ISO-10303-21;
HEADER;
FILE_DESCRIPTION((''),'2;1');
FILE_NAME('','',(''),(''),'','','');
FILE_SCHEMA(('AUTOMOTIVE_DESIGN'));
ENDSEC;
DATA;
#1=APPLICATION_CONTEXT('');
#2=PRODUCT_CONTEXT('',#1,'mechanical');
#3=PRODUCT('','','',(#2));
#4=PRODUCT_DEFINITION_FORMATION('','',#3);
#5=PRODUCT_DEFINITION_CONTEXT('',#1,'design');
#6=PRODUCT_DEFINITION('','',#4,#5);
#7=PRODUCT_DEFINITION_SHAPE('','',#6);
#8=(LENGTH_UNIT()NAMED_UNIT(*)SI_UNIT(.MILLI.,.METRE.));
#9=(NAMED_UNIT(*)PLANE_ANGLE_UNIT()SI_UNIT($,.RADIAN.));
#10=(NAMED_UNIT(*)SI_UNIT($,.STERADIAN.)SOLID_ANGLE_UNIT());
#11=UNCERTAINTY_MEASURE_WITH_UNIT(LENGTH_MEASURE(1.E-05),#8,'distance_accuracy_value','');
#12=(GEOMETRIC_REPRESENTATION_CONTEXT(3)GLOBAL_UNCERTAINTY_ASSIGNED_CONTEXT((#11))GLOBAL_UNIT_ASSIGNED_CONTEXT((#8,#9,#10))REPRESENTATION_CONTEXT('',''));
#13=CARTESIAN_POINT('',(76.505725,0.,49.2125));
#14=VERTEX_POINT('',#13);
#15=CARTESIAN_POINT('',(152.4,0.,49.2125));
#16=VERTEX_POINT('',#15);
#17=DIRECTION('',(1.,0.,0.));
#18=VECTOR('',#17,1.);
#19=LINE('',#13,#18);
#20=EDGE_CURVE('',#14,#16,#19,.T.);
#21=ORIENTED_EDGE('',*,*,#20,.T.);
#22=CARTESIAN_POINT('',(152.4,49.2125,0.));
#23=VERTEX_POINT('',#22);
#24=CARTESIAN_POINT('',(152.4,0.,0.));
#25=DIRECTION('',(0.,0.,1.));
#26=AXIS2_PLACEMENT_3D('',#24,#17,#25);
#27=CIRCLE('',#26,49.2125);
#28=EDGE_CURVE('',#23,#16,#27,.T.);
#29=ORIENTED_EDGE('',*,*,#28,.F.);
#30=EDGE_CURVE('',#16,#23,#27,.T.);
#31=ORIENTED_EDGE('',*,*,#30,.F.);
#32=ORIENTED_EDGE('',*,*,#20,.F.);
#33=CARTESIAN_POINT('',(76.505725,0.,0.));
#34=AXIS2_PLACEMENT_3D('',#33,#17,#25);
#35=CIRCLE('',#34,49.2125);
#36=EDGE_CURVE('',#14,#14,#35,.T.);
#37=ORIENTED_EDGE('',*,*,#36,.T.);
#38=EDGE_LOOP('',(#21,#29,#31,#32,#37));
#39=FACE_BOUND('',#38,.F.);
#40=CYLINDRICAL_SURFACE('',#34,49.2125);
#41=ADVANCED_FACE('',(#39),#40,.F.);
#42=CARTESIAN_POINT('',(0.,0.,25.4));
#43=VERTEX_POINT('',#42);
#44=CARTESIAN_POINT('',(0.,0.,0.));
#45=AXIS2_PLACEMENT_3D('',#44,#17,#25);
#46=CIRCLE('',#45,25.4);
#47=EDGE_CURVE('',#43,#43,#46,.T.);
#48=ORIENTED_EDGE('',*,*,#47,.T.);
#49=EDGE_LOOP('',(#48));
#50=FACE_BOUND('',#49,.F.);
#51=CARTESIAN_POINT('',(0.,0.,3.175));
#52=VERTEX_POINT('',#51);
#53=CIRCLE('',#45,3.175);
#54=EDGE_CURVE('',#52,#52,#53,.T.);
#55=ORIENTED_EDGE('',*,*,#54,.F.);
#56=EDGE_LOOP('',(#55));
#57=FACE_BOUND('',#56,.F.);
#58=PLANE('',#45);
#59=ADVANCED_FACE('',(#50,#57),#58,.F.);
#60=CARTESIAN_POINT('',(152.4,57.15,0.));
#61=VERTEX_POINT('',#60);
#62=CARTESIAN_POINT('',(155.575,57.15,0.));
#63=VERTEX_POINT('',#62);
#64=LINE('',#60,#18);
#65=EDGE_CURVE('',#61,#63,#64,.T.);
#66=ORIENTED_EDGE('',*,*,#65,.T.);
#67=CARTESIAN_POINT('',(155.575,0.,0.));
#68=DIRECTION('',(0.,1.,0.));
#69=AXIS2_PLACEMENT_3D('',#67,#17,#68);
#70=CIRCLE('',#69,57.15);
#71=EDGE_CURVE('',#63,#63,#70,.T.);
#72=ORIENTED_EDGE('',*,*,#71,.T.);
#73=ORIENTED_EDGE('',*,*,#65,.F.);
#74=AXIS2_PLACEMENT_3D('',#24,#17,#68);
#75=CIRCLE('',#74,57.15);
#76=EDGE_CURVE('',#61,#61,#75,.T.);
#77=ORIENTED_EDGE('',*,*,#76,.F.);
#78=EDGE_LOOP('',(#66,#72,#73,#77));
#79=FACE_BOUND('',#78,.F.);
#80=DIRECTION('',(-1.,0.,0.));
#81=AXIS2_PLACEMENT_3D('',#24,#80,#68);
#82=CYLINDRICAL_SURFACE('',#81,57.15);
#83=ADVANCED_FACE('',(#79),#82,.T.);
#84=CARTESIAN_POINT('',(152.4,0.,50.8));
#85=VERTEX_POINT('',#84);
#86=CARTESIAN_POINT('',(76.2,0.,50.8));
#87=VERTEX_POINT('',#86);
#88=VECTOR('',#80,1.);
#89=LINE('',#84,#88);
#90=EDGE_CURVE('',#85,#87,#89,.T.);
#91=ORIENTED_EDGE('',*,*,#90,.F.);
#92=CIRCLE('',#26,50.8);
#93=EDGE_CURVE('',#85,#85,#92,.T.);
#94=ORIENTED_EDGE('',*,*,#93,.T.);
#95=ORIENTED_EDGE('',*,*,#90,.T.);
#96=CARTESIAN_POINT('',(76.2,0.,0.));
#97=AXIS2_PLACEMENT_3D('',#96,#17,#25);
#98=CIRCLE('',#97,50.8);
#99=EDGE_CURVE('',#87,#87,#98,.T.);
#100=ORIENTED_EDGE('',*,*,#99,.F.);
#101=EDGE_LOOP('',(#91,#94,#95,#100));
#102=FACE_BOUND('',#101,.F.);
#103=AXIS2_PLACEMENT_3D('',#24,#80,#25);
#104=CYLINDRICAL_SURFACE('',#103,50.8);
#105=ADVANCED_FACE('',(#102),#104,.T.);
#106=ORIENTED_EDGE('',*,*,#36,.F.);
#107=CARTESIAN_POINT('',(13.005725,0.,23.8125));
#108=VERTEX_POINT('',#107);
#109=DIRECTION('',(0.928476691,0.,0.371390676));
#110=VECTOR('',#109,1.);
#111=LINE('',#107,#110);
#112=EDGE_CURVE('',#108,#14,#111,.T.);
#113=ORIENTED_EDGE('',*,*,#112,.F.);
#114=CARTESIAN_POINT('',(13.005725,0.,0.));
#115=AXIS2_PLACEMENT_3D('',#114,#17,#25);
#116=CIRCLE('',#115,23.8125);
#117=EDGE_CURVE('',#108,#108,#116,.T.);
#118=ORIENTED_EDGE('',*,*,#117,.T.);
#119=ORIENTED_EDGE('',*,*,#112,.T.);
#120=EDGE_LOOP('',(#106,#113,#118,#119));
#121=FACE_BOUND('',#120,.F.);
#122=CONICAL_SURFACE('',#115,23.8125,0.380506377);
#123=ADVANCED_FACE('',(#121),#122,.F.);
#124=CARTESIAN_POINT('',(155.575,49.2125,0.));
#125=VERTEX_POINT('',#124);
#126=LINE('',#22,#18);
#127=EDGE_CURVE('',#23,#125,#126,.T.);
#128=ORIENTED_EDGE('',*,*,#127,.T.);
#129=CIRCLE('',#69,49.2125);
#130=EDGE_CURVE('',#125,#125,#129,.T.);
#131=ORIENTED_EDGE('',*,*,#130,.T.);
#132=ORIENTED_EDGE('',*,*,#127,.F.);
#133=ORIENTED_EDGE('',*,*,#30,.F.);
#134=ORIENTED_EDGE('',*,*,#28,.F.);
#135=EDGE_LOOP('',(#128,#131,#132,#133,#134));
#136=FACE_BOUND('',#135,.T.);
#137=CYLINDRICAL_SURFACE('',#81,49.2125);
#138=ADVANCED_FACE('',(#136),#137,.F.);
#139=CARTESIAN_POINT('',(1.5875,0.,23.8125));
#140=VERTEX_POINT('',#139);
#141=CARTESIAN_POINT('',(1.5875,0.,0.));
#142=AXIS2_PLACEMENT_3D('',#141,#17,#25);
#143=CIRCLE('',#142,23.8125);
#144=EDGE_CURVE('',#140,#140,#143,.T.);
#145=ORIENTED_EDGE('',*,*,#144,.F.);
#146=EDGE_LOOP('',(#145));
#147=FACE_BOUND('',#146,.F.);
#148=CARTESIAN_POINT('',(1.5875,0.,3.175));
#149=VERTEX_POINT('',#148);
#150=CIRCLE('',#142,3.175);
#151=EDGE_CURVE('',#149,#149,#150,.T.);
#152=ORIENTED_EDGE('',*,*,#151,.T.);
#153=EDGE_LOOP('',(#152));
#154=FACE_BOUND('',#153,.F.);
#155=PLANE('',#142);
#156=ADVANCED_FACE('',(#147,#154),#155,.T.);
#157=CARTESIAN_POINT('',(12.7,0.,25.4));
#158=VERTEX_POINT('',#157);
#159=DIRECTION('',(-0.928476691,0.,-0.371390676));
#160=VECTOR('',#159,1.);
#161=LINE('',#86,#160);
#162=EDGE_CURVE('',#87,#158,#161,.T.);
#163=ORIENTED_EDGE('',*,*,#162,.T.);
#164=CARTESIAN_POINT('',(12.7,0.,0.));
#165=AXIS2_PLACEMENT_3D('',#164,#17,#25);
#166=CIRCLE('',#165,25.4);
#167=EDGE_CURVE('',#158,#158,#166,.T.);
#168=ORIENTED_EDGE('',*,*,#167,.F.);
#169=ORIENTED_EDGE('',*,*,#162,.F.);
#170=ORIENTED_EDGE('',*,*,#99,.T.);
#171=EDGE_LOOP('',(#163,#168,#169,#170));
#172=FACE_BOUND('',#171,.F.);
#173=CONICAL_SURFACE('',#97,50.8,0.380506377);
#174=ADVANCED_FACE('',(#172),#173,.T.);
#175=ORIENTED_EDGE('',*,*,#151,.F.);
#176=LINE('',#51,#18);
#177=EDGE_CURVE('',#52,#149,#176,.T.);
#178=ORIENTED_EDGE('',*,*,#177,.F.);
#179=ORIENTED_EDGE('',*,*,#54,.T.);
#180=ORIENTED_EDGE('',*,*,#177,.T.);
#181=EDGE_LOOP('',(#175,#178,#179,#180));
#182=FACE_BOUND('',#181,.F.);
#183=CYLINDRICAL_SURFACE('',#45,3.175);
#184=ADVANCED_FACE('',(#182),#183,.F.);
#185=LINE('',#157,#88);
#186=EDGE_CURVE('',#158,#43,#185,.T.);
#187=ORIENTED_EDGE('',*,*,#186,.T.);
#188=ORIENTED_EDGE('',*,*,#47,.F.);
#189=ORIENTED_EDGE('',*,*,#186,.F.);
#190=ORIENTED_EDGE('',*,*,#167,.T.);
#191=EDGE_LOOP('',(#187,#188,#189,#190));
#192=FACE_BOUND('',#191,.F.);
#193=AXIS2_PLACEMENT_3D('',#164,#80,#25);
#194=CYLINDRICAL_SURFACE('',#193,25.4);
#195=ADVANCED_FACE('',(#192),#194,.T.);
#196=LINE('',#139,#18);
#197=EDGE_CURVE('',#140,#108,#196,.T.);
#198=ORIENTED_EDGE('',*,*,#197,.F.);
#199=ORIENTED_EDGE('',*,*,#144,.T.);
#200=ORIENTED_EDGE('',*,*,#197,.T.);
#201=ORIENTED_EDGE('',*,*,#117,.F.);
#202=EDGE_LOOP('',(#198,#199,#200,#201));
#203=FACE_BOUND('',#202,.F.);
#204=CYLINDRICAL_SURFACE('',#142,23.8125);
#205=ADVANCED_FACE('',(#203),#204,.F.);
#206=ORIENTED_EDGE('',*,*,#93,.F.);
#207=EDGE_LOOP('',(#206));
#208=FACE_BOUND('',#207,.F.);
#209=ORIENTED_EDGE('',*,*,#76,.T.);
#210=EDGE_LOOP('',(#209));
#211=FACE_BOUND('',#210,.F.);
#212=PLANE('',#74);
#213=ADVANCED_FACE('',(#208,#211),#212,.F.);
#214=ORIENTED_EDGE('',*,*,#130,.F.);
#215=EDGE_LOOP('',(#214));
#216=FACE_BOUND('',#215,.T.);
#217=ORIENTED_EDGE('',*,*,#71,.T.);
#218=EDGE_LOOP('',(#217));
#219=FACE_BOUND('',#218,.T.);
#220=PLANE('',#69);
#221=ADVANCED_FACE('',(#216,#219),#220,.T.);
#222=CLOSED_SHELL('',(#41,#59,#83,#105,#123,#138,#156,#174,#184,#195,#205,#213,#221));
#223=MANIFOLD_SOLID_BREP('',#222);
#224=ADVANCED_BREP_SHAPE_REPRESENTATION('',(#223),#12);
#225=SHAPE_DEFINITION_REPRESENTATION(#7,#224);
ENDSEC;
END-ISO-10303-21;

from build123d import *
from build123d import SkipClean  # not in build123d's __all__

# Parameters (mm, degrees)
F2_R     = 57.15
F2_R_2   = 49.2125
F3_DEPTH = 3.175


# Not quite as in the source:
# - a feature of the source that left no trace in its solid (it failed there, or was rolled back) is left out


with BuildPart() as f1:
    # F0 (on Front) → F1 (revolve)
    with BuildSketch(Plane.XZ):
        Polygon((152.4, 50.8), (76.2, 50.8), (12.7, 25.4), (0, 25.4), (0, 3.175), (1.5875, 3.175), (1.5875, 23.8125), (13.0057245657, 23.8125), (76.5057245657, 49.2125), (152.4, 49.2125), align=None)
    revolve(axis=Axis((76.2, 0, 0), (1, 0, 0)))

    # F2 (on face) → F3 (join)
    with BuildSketch(Plane.YZ.offset(152.4)):
        Circle(F2_R)
        Circle(F2_R_2, mode=Mode.SUBTRACT)
    with SkipClean():  # cleaning this boolean's faces spoils the solid; the shape is the same uncleaned
        extrude(amount=F3_DEPTH)


solid = f1.part
